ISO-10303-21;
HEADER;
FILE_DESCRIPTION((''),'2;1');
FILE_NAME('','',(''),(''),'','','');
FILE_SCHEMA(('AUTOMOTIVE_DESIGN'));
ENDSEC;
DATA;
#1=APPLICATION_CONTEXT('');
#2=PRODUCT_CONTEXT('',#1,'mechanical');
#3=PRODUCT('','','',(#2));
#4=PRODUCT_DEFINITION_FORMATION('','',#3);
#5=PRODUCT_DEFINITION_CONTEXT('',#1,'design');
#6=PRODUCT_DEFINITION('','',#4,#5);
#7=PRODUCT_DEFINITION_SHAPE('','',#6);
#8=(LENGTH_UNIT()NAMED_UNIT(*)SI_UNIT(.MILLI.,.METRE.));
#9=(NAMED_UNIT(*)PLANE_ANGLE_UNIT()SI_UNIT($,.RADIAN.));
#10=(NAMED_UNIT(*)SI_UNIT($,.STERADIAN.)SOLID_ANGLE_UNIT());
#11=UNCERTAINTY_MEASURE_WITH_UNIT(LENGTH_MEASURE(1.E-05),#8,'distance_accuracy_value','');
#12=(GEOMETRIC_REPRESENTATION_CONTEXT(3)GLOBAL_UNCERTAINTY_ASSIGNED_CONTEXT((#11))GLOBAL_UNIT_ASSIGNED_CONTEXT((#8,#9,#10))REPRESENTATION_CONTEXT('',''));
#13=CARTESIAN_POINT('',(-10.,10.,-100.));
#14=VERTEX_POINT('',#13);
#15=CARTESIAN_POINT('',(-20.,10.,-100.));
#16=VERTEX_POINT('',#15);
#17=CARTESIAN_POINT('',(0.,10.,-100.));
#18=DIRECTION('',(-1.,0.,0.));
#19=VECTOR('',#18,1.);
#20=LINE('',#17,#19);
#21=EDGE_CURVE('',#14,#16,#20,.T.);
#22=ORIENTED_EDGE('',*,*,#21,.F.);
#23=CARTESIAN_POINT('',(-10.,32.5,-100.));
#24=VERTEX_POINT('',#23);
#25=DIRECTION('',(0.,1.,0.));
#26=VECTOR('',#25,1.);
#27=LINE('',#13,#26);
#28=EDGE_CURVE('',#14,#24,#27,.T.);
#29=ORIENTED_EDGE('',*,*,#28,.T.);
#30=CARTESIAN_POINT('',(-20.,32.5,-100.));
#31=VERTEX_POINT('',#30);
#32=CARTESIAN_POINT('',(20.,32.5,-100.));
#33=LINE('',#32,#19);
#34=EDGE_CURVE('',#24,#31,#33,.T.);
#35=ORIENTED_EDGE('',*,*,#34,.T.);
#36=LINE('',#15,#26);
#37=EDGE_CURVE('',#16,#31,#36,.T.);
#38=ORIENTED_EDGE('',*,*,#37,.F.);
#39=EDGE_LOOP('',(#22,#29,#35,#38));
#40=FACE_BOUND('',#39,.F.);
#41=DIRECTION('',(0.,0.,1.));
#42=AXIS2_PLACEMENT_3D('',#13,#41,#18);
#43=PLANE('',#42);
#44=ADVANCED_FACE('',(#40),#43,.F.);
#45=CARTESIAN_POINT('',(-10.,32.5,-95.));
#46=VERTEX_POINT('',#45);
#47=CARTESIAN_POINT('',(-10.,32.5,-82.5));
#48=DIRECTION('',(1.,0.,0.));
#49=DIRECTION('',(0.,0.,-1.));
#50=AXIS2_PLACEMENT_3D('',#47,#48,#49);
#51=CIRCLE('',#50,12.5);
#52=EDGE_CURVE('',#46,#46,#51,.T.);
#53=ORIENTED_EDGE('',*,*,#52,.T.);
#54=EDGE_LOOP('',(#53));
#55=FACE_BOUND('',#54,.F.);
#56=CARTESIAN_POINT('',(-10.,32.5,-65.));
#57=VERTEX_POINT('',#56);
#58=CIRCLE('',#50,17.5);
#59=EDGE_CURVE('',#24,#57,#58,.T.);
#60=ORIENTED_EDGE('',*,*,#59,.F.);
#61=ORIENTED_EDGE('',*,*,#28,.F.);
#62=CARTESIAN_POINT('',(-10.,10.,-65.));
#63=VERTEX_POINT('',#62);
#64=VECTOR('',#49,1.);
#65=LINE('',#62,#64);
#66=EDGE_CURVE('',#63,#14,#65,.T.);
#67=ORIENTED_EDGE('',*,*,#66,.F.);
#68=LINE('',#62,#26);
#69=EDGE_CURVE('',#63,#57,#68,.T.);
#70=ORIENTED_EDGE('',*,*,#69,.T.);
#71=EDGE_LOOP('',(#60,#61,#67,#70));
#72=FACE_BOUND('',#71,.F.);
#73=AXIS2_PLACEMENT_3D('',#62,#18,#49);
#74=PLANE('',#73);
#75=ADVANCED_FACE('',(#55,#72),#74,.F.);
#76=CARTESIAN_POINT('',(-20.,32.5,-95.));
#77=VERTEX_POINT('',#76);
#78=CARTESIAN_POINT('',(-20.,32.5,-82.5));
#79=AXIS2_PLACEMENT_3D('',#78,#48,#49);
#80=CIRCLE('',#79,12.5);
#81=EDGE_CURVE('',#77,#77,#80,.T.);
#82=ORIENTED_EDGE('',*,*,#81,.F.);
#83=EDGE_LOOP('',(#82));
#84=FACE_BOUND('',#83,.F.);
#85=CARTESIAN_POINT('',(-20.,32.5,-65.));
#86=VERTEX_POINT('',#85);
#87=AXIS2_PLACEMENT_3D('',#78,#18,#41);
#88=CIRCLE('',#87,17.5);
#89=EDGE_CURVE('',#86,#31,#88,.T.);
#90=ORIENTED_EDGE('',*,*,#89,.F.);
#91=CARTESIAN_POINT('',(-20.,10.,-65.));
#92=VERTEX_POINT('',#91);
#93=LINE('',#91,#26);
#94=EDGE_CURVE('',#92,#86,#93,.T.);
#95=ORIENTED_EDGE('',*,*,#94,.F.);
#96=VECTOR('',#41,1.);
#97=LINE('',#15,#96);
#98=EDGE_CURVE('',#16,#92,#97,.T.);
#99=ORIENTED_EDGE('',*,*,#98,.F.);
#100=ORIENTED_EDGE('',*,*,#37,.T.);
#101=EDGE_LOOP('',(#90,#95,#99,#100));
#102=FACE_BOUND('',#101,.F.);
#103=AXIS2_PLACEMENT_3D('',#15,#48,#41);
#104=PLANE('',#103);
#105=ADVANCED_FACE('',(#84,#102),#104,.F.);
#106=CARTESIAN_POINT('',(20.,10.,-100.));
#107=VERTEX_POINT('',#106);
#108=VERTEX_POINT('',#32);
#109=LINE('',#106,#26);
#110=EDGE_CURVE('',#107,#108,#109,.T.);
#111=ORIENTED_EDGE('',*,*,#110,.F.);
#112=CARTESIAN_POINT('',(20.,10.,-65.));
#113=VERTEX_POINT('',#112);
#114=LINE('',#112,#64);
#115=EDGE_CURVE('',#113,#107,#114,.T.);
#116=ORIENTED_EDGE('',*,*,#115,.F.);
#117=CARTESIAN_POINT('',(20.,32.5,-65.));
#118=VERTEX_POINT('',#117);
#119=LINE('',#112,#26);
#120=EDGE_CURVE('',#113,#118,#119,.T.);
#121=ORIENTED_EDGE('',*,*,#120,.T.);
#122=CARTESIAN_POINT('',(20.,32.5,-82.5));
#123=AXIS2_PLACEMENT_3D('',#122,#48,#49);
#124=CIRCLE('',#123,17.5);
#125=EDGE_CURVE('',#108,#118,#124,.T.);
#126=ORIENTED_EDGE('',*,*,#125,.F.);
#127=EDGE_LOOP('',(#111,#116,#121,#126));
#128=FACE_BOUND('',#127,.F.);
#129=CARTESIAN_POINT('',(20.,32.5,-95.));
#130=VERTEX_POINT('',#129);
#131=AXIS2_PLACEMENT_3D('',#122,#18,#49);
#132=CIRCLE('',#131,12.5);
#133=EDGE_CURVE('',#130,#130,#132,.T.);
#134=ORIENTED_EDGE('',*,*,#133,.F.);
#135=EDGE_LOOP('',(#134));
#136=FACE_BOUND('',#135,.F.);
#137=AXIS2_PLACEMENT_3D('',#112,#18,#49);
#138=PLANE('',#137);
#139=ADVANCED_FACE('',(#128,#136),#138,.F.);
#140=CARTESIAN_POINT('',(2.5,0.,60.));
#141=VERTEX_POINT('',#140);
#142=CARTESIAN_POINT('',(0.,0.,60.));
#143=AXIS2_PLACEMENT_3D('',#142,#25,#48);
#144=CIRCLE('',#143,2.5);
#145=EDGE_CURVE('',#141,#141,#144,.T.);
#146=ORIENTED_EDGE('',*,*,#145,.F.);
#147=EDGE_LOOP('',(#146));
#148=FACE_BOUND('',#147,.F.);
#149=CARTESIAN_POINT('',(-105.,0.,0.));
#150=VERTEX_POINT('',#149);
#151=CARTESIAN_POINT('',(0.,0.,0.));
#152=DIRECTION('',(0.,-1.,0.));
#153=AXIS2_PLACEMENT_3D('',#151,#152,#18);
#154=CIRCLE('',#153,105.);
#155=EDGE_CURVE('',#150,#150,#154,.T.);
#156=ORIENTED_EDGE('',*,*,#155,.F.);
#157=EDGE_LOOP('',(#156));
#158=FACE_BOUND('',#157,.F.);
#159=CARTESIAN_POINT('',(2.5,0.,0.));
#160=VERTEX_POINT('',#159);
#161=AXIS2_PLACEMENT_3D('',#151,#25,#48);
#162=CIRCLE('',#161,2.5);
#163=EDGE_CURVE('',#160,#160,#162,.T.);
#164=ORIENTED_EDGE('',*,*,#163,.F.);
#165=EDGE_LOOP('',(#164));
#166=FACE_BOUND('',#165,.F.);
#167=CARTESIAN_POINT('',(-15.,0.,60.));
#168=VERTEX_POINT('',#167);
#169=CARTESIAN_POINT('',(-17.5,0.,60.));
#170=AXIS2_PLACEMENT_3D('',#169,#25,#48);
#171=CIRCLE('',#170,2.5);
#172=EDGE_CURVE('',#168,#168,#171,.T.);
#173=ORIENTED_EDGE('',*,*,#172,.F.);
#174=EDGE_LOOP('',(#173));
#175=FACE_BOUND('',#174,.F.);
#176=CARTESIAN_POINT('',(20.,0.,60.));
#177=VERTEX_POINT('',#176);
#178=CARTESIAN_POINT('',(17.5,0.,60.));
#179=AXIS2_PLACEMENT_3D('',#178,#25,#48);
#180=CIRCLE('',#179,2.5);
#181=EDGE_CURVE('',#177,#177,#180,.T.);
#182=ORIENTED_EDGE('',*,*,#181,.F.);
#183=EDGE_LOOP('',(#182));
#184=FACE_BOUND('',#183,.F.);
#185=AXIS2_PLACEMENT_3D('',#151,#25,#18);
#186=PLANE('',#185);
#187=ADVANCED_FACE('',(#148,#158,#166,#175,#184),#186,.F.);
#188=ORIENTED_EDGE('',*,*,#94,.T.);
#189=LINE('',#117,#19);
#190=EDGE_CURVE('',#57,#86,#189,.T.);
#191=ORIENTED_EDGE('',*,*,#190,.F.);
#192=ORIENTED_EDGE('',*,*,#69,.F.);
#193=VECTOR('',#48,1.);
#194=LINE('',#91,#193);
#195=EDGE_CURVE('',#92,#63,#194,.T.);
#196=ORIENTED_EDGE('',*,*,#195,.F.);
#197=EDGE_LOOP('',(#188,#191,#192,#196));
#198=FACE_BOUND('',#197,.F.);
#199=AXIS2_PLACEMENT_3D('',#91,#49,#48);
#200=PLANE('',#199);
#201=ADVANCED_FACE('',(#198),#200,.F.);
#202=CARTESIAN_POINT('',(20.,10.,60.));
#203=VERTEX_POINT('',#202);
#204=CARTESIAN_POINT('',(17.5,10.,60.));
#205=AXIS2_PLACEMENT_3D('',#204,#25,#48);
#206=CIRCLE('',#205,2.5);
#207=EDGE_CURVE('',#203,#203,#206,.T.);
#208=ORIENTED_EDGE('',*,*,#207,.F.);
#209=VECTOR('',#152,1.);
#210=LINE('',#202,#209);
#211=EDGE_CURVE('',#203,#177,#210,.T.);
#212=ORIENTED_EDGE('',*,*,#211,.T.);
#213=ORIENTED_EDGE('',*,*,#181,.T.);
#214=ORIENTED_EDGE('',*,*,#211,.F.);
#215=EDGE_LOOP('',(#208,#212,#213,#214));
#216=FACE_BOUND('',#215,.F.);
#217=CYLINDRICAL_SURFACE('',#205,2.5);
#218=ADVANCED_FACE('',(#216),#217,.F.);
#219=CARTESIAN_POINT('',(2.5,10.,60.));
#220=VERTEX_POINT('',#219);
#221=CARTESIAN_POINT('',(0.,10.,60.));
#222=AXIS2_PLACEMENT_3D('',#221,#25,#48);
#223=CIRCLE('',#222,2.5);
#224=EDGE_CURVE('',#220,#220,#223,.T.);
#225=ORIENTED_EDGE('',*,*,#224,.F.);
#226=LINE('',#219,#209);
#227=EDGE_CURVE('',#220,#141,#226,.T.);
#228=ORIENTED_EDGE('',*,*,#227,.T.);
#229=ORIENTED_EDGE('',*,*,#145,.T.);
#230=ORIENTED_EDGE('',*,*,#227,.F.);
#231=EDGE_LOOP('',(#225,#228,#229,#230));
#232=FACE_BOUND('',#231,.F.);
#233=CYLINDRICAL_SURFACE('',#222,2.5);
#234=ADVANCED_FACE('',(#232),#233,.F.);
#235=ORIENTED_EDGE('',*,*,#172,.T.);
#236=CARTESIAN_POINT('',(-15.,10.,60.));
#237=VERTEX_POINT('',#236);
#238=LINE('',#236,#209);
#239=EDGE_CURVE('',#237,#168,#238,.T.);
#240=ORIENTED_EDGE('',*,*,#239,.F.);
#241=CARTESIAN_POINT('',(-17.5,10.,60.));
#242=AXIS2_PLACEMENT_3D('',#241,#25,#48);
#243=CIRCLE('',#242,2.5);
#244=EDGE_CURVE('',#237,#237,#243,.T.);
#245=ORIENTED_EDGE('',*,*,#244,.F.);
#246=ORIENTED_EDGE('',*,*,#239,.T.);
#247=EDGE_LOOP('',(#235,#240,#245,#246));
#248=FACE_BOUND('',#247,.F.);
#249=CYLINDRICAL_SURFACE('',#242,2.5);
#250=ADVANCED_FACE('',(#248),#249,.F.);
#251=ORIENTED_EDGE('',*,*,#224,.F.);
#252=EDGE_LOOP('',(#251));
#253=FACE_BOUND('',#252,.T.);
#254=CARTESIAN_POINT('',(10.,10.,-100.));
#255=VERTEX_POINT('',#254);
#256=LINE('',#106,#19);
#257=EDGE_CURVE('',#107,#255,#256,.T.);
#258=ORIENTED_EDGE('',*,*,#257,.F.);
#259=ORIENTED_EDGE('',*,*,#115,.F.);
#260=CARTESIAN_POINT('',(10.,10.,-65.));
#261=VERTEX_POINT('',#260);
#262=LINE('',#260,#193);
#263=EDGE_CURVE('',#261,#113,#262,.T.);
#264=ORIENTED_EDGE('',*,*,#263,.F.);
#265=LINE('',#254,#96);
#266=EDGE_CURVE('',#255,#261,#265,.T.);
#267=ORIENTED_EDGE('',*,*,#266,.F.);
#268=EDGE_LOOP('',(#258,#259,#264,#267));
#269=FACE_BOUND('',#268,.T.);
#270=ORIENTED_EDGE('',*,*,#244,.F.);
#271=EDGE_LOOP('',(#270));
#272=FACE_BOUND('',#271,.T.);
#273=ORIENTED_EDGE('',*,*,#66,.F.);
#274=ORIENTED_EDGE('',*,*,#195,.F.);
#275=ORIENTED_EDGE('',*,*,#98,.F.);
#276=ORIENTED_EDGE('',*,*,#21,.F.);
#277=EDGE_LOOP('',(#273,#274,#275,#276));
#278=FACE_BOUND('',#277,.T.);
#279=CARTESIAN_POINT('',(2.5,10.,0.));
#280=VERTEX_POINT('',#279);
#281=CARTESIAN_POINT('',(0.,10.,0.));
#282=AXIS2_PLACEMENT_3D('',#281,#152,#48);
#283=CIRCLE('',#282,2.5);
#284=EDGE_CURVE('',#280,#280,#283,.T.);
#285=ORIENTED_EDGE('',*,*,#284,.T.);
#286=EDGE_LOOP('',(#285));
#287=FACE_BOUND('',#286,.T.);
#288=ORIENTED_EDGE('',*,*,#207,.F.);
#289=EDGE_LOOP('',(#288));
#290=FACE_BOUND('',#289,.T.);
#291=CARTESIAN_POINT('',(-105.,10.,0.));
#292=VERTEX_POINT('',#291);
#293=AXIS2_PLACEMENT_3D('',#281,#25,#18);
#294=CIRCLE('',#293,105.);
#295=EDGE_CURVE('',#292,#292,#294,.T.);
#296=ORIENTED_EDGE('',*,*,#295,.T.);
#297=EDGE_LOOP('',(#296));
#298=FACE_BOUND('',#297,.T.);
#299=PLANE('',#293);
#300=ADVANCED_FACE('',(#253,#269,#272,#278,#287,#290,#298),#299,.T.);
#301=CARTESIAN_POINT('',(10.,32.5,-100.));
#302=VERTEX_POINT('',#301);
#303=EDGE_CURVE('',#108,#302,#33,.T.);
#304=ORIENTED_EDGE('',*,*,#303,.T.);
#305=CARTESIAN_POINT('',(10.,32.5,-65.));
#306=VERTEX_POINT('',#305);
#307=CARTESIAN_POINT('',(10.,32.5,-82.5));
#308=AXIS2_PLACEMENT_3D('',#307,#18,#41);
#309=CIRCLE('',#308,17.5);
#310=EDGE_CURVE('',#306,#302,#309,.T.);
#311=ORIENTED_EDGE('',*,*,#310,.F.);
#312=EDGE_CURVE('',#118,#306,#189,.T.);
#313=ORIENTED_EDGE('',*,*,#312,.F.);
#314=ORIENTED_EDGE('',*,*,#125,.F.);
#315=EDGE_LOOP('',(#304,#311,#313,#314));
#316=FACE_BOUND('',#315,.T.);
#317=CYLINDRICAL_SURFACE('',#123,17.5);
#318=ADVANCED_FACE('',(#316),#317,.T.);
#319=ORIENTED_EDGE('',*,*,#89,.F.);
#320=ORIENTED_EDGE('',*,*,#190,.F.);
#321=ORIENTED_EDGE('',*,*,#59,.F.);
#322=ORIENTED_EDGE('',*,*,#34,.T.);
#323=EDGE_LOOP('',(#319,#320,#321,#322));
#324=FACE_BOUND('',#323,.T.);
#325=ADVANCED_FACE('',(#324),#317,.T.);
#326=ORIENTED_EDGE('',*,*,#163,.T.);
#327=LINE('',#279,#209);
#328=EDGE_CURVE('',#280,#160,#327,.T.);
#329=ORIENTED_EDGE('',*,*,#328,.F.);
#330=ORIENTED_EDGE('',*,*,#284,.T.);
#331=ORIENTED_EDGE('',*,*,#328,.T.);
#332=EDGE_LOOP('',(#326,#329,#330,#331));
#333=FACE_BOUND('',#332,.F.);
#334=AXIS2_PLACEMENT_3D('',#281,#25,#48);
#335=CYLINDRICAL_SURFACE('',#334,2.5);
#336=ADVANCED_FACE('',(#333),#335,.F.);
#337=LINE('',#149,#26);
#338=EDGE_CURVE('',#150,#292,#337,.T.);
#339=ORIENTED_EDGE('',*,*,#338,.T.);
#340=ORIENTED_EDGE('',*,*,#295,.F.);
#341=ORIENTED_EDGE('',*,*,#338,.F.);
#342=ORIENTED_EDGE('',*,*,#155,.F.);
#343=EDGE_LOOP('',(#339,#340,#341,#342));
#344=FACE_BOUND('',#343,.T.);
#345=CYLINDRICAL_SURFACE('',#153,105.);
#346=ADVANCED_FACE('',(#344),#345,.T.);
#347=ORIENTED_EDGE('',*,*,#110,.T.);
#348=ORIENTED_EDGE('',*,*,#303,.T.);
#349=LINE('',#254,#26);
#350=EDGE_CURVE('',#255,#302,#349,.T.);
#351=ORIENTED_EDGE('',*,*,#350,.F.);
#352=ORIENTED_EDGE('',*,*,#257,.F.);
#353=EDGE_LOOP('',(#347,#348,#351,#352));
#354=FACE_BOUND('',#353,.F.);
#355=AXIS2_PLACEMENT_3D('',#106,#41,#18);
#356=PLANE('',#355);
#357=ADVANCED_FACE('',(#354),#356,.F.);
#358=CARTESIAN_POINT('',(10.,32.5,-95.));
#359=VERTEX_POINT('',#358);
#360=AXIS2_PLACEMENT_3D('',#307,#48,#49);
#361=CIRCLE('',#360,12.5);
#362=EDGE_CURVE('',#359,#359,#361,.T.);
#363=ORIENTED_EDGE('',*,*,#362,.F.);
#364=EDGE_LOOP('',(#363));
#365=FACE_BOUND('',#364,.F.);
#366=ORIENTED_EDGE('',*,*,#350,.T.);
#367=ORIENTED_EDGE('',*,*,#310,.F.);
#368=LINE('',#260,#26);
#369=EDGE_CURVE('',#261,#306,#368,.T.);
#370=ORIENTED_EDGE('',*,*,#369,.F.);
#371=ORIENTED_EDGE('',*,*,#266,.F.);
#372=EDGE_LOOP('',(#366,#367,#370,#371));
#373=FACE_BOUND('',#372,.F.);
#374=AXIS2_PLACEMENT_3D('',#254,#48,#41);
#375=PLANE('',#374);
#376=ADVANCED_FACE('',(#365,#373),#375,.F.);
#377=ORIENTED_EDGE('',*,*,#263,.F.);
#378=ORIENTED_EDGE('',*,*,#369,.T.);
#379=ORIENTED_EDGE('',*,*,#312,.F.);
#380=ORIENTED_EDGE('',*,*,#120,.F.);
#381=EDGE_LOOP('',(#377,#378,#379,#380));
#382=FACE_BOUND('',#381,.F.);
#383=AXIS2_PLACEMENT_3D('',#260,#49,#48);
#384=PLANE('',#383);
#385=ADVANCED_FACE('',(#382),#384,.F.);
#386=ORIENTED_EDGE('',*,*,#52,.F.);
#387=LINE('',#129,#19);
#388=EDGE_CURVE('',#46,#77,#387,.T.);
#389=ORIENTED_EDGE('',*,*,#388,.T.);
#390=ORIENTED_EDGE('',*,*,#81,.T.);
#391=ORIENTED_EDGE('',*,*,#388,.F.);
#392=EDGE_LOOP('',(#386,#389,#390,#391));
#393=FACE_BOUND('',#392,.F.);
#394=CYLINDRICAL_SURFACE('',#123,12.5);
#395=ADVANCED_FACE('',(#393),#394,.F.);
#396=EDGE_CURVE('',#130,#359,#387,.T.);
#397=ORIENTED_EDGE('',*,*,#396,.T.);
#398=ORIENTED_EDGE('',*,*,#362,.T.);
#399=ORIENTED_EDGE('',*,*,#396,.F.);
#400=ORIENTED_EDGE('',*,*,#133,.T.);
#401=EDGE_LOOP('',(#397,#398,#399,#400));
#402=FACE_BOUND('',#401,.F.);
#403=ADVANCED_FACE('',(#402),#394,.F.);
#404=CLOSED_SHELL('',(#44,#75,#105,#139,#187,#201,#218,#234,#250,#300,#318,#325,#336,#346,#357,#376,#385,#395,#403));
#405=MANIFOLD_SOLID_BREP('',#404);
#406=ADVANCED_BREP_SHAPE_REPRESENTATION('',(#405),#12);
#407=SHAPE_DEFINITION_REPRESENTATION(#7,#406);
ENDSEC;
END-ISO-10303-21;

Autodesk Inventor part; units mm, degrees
ref_plane "YZ Plane" through (0, 0, 0) normal (1, 0, 0) x (0, 1, 0)
ref_plane "XZ Plane" through (0, 0, 0) normal (0, 1, 0) x (-1, 0, 0)
ref_plane "XY Plane" through (0, 0, 0) normal (0, 0, 1) x (1, 0, 0)
sketch "Sketch1" plane through (0, 0, 0) normal (0, 1, 0) x (-1, 0, 0)
  circle A0 centre (0, 0) radius 105
  dimension "d0" = 210
extrude "Extrusion1" add sketch "Sketch1" along normal blind 10
sketch "Sketch2" plane through (0, 10, 0) normal (0, 1, 0) x (1, 0, 0)
  line L0 (-79.8594, -68.6516) -> (79.5179, -68.6516)
  line L1 (0, 0) -> (0, -80)
  line L2 (0, -80) -> (0, -60)
  line L3 (0, -60) -> (17.5, -60)
  line L4 (0, -60) -> (-17.5, -60)
  circle A0 centre (-17.5, -60) radius 2.5
  circle A1 centre (0, -60) radius 2.5
  circle A2 centre (17.5, -60) radius 2.5
  dimension "d4" = 80
  dimension "d5" = 20
  dimension "d6" = 17.5
  dimension "d7" = 17.5
  dimension "d8" = 5
  dimension "d9" = 5
  dimension "d10" = 5
extrude "Extrusion2" cut sketch "Sketch2" against normal blind 10
sketch "Sketch3" plane through (0, 10, 0) normal (0, 1, 0) x (1, 0, 0)
  circle A0 centre (0, 0) radius 2.5
  dimension "d13" = 5
extrude "Extrusion3" cut sketch "Sketch3" against normal blind 10
sketch "Sketch4" plane through (0, 10, 0) normal (0, 1, 0) x (1, 0, 0)
  circle A0 centre (0, 0) radius 2.5 projected
  line L0 (0, 0) -> (0, 80)
  line L1 (-15, 80) -> (-15, 65)
  line L2 (-15, 65) -> (15, 65)
  line L3 (15, 65) -> (15, 95)
  line L4 (15, 95) -> (-15, 95)
  line L5 (-15, 95) -> (-15, 80)
  line L6 (0, 80) -> (-7.5, 80)
  line L7 (-7.5, 80) -> (7.5, 80)
  line L8 (7.5, 80) -> (7.5, 95)
  line L9 (7.5, 80) -> (7.5, 65)
  line L10 (-7.5, 80) -> (-7.5, 95)
  line L11 (-7.5, 80) -> (-7.5, 65)
  dimension "d20" = 15
  dimension "d21" = 15
  dimension "d22" = 30
  dimension "d23" = 30
  dimension "d24" = 7.5
  dimension "d25" = 15
extrude "Extrusion4" add sketch "Sketch4" along normal blind 30 contours L2 L11 L6 L0 | L0 L7 L9 L2 | L6 L10 L4 L8 L7
sketch "Sketch5" plane through (7.5, 10, -65) normal (1, 0, 0) x (0, 0, -1)
  line L0 (40, 0) -> (-170, 0) projected
  line L1 (40, 0) -> (15, 0)
  line L2 (15, 0) -> (15, 15)
  circle A0 centre (15, 15) radius 7.5
  line L3 (30, 0) -> (30, 30) projected
  arc A1 (30, 15) -> (0, 15) centre (15, 15) ccw
  line L4 (15, 15) -> (0, 15) construction
  line L5 (15, 15) -> (30, 15) construction
  line L6 (0, 0) -> (0, 30) projected
  line L7 (0, 15) -> (0, 30)
  line L8 (0, 30) -> (30, 30) projected
  line L9 (0, 30) -> (30, 30)
  line L10 (30, 30) -> (30, 15)
  point P0 (-65, -10)
  point P1 (15, 30)
  dimension "d28" = 25
  dimension "d29" = 15
  dimension "d30" = 15
  dimension "d31" = 180
extrude "Extrusion5" cut sketch "Sketch5" against normal blind 30 contours A1 L8 L3 | A1 L6 L8 | A0
sketch "Sketch6" plane through (7.5, 10, -65) normal (1, 0, 0) x (0, 0, -1)
  circle A0 centre (15, 15) radius 7.5 projected
  circle A1 centre (15, 15) radius 5
  circle A2 centre (15, 15) radius 7.5
  point P0 (-65, -10)
  dimension "d34" = 10
extrude "Extrusion6" add sketch "Sketch6" against normal blind 15
sketch "Sketch7" plane through (7.5, 10, -65) normal (1, 0, 0) x (0, 0, -1)
  line L0 (0, 0) -> (30, 0) projected
  line L1 (0, 0) -> (30, 0)
  line L2 (30, 0) -> (30, 34.6991)
  line L3 (30, 34.6991) -> (0, 34.6991)
  line L4 (0, 34.6991) -> (0, 0)
  point P0 (-65, -10)
extrude "Extrusion7" cut sketch "Sketch7" against normal blind 15
sketch "Sketch8" plane through (0, 10, 0) normal (0, 1, 0) x (1, 0, 0)
  circle A0 centre (0, 0) radius 2.5 projected
  line L0 (0, 0) -> (0, 100)
  line L1 (0, 100) -> (-10, 100)
  line L2 (-10, 100) -> (-20, 100)
  line L3 (-20, 100) -> (-20, 65)
  line L4 (-20, 65) -> (-10, 65)
  line L5 (-10, 65) -> (-10, 100)
  line L6 (0, 100) -> (10, 100)
  line L7 (10, 100) -> (20, 100)
  line L8 (20, 100) -> (20, 65)
  line L9 (20, 65) -> (10, 65)
  line L10 (10, 65) -> (10, 100)
  dimension "d42" = 100
  dimension "d43" = 10
  dimension "d44" = 10
  dimension "d45" = 35
  dimension "d46" = 10
  dimension "d47" = 10
  dimension "d48" = 35
extrude "Extrusion8" add sketch "Sketch8" along normal blind 35 contours L5 L4 L3 L2 | L7 L8 L9 L10
thicken "Thicken1" operation add thickness 5 both sides no extend neighbours yes toward (0, 1, 0) faces at (13.3333, 45, -88.3333)
thicken "Thicken2" operation add thickness 5 both sides no extend neighbours yes toward (0, 1, 0) faces at (-16.6667, 45, -88.3333)
sketch "Sketch10" plane through (20, 10, -65) normal (1, 0, 0) x (0, 0, -1)
  line L0 (0, 0) -> (35, 0) projected
  line L1 (0, 0) -> (17.5, 0)
  line L2 (17.5, 0) -> (17.5, 22.5)
  circle A0 centre (17.5, 22.5) radius 12.5
  circle A1 centre (17.5, 22.5) radius 17.5
  line L3 (35, 0) -> (35, 40) projected
  line L4 (0, 0) -> (0, 40) projected
  line L5 (0, 22.5) -> (0, 40)
  line L6 (35, 40) -> (0, 40) projected
  line L7 (0, 40) -> (35, 40)
  line L8 (35, 40) -> (35, 22.5)
  point P0 (-65, -10)
  point P1 (17.5, 40)
  dimension "d60" = 22.5
  dimension "d61" = 25
extrude "Extrusion9" cut sketch "Sketch10" against normal blind 40 contours L4 L6 A1 | L6 L3 A1 | A0
sketch "Sketch11" plane through (20, 10, -65) normal (1, 0, 0) x (0, 0, -1)
  line L0 (40, 0) -> (-170, 0) projected
  line L1 (35.2175, 0) -> (0.2175, 0)
  line L2 (0.2175, 0) -> (-34.7825, 0)
  line L3 (0.2175, 0) -> (40.2175, 0)
  circle A0 centre (40.2175, 17.5) radius 12.5
  circle A1 centre (40.2175, 17.5) radius 17.5
  line L4 (-34.7825, 0) -> (32.4725, 33.1928)
  point P0 (-65, -10)
  dimension "d73" = 35
  dimension "d74" = 35
  dimension "d75" = 40
  dimension "d78" = 35
sketch "Sketch12" plane through (-20, 10, -100) normal (-1, 0, 0) x (0, 0, 1)
  line L0 (205, 0) -> (-5, 0) projected
  line L1 (37.401, 0) -> (37.401, 45.2729)
  line L2 (37.401, 45.2729) -> (-3.1543, 48.8051)
  line L3 (-3.1543, 48.8051) -> (-3.1543, 0)
  line L4 (37.401, 0) -> (-3.1543, 0)
  point P0 (100, -10)
extrude "Extrusion10" cut sketch "Sketch12" against normal blind 40
extrude "Extrusion11" add sketch "Sketch11" against normal blind 40
sketch "Sketch13" plane through (0, 0, 0) normal (0, 0, 1) x (1, 0, 0)
  line L0 (105, 10) -> (-105, 10) projected
  line L1 (0, 10) -> (10, 10)
  line L2 (10, 10) -> (10, 48.8421)
  line L3 (20, 43.1928) -> (-20, 43.1928) projected
  line L4 (10, 48.8421) -> (-10, 48.8421)
  line L5 (-10, 48.8421) -> (-10, 10)
  line L6 (-10, 10) -> (10, 10)
  point P0 (0, 0)
  point P1 (-20, 10)
  point P2 (20, 10)
  dimension "d83" = 10
  dimension "d84" = 20
extrude "Extrusion12" cut sketch "Sketch13" against normal blind 150
sketch "Sketch14" plane through (20, 10, -65) normal (1, 0, 0) x (0, 0, -1)
  line L0 (38.0776, 0) -> (-34.7825, 0) projected
  line L1 (-34.7825, 0) -> (42.8397, 49.7383)
  line L2 (42.8397, 49.7383) -> (77.8644, 0)
  line L3 (77.8644, 0) -> (-34.7825, 0)
  point P0 (-65, -10)
extrude "Extrusion13" cut sketch "Sketch14" against normal blind 150
sketch "Sketch15" plane through (0, 10, 0) normal (0, 1, 0) x (1, 0, 0)
  circle A0 centre (0, 0) radius 2.5 projected
  line L0 (0, 0) -> (0, 100)
  line L1 (0, 100) -> (-20, 100)
  line L2 (-20, 100) -> (-20, 65)
  line L3 (-20, 65) -> (-10, 65)
  line L4 (-10, 65) -> (-10, 100)
  line L5 (-10, 65) -> (10, 65)
  line L6 (10, 65) -> (20, 65)
  line L7 (20, 65) -> (20, 100)
  line L8 (20, 100) -> (10, 100)
  line L9 (10, 100) -> (10, 65)
  dimension "d89" = 100
  dimension "d90" = 20
  dimension "d91" = 35
  dimension "d92" = 10
  dimension "d93" = 20
  dimension "d94" = 10
  dimension "d95" = 35
  dimension "d96" = 10
extrude "Extrusion14" add sketch "Sketch15" along normal blind 40 contours L3 L2 L1 L4 | L9 L8 L7 L6
sketch "Sketch16" plane through (20, 10, -65) normal (1, 0, 0) x (0, 0, -1)
  line L0 (0, 40) -> (35, 40) projected
  line L1 (17.5, 40) -> (17.5, 22.5)
  circle A0 centre (17.5, 22.5) radius 12.5
  circle A1 centre (17.5, 22.5) radius 17.5
  line L2 (35, 0) -> (35, 40) projected
  line L3 (0, 0) -> (0, 40) projected
  line L4 (0, 22.5) -> (0, 40)
  line L5 (0, 40) -> (35, 40)
  line L6 (35, 40) -> (35, 22.5)
  point P0 (-65, -10)
  dimension "d99" = 17.5
  dimension "d100" = 25
extrude "Extrusion15" cut sketch "Sketch16" against normal blind 40 contours L0 A1 L3 | L0 L2 A1 | A0
properties part number "Base do telescópio"
